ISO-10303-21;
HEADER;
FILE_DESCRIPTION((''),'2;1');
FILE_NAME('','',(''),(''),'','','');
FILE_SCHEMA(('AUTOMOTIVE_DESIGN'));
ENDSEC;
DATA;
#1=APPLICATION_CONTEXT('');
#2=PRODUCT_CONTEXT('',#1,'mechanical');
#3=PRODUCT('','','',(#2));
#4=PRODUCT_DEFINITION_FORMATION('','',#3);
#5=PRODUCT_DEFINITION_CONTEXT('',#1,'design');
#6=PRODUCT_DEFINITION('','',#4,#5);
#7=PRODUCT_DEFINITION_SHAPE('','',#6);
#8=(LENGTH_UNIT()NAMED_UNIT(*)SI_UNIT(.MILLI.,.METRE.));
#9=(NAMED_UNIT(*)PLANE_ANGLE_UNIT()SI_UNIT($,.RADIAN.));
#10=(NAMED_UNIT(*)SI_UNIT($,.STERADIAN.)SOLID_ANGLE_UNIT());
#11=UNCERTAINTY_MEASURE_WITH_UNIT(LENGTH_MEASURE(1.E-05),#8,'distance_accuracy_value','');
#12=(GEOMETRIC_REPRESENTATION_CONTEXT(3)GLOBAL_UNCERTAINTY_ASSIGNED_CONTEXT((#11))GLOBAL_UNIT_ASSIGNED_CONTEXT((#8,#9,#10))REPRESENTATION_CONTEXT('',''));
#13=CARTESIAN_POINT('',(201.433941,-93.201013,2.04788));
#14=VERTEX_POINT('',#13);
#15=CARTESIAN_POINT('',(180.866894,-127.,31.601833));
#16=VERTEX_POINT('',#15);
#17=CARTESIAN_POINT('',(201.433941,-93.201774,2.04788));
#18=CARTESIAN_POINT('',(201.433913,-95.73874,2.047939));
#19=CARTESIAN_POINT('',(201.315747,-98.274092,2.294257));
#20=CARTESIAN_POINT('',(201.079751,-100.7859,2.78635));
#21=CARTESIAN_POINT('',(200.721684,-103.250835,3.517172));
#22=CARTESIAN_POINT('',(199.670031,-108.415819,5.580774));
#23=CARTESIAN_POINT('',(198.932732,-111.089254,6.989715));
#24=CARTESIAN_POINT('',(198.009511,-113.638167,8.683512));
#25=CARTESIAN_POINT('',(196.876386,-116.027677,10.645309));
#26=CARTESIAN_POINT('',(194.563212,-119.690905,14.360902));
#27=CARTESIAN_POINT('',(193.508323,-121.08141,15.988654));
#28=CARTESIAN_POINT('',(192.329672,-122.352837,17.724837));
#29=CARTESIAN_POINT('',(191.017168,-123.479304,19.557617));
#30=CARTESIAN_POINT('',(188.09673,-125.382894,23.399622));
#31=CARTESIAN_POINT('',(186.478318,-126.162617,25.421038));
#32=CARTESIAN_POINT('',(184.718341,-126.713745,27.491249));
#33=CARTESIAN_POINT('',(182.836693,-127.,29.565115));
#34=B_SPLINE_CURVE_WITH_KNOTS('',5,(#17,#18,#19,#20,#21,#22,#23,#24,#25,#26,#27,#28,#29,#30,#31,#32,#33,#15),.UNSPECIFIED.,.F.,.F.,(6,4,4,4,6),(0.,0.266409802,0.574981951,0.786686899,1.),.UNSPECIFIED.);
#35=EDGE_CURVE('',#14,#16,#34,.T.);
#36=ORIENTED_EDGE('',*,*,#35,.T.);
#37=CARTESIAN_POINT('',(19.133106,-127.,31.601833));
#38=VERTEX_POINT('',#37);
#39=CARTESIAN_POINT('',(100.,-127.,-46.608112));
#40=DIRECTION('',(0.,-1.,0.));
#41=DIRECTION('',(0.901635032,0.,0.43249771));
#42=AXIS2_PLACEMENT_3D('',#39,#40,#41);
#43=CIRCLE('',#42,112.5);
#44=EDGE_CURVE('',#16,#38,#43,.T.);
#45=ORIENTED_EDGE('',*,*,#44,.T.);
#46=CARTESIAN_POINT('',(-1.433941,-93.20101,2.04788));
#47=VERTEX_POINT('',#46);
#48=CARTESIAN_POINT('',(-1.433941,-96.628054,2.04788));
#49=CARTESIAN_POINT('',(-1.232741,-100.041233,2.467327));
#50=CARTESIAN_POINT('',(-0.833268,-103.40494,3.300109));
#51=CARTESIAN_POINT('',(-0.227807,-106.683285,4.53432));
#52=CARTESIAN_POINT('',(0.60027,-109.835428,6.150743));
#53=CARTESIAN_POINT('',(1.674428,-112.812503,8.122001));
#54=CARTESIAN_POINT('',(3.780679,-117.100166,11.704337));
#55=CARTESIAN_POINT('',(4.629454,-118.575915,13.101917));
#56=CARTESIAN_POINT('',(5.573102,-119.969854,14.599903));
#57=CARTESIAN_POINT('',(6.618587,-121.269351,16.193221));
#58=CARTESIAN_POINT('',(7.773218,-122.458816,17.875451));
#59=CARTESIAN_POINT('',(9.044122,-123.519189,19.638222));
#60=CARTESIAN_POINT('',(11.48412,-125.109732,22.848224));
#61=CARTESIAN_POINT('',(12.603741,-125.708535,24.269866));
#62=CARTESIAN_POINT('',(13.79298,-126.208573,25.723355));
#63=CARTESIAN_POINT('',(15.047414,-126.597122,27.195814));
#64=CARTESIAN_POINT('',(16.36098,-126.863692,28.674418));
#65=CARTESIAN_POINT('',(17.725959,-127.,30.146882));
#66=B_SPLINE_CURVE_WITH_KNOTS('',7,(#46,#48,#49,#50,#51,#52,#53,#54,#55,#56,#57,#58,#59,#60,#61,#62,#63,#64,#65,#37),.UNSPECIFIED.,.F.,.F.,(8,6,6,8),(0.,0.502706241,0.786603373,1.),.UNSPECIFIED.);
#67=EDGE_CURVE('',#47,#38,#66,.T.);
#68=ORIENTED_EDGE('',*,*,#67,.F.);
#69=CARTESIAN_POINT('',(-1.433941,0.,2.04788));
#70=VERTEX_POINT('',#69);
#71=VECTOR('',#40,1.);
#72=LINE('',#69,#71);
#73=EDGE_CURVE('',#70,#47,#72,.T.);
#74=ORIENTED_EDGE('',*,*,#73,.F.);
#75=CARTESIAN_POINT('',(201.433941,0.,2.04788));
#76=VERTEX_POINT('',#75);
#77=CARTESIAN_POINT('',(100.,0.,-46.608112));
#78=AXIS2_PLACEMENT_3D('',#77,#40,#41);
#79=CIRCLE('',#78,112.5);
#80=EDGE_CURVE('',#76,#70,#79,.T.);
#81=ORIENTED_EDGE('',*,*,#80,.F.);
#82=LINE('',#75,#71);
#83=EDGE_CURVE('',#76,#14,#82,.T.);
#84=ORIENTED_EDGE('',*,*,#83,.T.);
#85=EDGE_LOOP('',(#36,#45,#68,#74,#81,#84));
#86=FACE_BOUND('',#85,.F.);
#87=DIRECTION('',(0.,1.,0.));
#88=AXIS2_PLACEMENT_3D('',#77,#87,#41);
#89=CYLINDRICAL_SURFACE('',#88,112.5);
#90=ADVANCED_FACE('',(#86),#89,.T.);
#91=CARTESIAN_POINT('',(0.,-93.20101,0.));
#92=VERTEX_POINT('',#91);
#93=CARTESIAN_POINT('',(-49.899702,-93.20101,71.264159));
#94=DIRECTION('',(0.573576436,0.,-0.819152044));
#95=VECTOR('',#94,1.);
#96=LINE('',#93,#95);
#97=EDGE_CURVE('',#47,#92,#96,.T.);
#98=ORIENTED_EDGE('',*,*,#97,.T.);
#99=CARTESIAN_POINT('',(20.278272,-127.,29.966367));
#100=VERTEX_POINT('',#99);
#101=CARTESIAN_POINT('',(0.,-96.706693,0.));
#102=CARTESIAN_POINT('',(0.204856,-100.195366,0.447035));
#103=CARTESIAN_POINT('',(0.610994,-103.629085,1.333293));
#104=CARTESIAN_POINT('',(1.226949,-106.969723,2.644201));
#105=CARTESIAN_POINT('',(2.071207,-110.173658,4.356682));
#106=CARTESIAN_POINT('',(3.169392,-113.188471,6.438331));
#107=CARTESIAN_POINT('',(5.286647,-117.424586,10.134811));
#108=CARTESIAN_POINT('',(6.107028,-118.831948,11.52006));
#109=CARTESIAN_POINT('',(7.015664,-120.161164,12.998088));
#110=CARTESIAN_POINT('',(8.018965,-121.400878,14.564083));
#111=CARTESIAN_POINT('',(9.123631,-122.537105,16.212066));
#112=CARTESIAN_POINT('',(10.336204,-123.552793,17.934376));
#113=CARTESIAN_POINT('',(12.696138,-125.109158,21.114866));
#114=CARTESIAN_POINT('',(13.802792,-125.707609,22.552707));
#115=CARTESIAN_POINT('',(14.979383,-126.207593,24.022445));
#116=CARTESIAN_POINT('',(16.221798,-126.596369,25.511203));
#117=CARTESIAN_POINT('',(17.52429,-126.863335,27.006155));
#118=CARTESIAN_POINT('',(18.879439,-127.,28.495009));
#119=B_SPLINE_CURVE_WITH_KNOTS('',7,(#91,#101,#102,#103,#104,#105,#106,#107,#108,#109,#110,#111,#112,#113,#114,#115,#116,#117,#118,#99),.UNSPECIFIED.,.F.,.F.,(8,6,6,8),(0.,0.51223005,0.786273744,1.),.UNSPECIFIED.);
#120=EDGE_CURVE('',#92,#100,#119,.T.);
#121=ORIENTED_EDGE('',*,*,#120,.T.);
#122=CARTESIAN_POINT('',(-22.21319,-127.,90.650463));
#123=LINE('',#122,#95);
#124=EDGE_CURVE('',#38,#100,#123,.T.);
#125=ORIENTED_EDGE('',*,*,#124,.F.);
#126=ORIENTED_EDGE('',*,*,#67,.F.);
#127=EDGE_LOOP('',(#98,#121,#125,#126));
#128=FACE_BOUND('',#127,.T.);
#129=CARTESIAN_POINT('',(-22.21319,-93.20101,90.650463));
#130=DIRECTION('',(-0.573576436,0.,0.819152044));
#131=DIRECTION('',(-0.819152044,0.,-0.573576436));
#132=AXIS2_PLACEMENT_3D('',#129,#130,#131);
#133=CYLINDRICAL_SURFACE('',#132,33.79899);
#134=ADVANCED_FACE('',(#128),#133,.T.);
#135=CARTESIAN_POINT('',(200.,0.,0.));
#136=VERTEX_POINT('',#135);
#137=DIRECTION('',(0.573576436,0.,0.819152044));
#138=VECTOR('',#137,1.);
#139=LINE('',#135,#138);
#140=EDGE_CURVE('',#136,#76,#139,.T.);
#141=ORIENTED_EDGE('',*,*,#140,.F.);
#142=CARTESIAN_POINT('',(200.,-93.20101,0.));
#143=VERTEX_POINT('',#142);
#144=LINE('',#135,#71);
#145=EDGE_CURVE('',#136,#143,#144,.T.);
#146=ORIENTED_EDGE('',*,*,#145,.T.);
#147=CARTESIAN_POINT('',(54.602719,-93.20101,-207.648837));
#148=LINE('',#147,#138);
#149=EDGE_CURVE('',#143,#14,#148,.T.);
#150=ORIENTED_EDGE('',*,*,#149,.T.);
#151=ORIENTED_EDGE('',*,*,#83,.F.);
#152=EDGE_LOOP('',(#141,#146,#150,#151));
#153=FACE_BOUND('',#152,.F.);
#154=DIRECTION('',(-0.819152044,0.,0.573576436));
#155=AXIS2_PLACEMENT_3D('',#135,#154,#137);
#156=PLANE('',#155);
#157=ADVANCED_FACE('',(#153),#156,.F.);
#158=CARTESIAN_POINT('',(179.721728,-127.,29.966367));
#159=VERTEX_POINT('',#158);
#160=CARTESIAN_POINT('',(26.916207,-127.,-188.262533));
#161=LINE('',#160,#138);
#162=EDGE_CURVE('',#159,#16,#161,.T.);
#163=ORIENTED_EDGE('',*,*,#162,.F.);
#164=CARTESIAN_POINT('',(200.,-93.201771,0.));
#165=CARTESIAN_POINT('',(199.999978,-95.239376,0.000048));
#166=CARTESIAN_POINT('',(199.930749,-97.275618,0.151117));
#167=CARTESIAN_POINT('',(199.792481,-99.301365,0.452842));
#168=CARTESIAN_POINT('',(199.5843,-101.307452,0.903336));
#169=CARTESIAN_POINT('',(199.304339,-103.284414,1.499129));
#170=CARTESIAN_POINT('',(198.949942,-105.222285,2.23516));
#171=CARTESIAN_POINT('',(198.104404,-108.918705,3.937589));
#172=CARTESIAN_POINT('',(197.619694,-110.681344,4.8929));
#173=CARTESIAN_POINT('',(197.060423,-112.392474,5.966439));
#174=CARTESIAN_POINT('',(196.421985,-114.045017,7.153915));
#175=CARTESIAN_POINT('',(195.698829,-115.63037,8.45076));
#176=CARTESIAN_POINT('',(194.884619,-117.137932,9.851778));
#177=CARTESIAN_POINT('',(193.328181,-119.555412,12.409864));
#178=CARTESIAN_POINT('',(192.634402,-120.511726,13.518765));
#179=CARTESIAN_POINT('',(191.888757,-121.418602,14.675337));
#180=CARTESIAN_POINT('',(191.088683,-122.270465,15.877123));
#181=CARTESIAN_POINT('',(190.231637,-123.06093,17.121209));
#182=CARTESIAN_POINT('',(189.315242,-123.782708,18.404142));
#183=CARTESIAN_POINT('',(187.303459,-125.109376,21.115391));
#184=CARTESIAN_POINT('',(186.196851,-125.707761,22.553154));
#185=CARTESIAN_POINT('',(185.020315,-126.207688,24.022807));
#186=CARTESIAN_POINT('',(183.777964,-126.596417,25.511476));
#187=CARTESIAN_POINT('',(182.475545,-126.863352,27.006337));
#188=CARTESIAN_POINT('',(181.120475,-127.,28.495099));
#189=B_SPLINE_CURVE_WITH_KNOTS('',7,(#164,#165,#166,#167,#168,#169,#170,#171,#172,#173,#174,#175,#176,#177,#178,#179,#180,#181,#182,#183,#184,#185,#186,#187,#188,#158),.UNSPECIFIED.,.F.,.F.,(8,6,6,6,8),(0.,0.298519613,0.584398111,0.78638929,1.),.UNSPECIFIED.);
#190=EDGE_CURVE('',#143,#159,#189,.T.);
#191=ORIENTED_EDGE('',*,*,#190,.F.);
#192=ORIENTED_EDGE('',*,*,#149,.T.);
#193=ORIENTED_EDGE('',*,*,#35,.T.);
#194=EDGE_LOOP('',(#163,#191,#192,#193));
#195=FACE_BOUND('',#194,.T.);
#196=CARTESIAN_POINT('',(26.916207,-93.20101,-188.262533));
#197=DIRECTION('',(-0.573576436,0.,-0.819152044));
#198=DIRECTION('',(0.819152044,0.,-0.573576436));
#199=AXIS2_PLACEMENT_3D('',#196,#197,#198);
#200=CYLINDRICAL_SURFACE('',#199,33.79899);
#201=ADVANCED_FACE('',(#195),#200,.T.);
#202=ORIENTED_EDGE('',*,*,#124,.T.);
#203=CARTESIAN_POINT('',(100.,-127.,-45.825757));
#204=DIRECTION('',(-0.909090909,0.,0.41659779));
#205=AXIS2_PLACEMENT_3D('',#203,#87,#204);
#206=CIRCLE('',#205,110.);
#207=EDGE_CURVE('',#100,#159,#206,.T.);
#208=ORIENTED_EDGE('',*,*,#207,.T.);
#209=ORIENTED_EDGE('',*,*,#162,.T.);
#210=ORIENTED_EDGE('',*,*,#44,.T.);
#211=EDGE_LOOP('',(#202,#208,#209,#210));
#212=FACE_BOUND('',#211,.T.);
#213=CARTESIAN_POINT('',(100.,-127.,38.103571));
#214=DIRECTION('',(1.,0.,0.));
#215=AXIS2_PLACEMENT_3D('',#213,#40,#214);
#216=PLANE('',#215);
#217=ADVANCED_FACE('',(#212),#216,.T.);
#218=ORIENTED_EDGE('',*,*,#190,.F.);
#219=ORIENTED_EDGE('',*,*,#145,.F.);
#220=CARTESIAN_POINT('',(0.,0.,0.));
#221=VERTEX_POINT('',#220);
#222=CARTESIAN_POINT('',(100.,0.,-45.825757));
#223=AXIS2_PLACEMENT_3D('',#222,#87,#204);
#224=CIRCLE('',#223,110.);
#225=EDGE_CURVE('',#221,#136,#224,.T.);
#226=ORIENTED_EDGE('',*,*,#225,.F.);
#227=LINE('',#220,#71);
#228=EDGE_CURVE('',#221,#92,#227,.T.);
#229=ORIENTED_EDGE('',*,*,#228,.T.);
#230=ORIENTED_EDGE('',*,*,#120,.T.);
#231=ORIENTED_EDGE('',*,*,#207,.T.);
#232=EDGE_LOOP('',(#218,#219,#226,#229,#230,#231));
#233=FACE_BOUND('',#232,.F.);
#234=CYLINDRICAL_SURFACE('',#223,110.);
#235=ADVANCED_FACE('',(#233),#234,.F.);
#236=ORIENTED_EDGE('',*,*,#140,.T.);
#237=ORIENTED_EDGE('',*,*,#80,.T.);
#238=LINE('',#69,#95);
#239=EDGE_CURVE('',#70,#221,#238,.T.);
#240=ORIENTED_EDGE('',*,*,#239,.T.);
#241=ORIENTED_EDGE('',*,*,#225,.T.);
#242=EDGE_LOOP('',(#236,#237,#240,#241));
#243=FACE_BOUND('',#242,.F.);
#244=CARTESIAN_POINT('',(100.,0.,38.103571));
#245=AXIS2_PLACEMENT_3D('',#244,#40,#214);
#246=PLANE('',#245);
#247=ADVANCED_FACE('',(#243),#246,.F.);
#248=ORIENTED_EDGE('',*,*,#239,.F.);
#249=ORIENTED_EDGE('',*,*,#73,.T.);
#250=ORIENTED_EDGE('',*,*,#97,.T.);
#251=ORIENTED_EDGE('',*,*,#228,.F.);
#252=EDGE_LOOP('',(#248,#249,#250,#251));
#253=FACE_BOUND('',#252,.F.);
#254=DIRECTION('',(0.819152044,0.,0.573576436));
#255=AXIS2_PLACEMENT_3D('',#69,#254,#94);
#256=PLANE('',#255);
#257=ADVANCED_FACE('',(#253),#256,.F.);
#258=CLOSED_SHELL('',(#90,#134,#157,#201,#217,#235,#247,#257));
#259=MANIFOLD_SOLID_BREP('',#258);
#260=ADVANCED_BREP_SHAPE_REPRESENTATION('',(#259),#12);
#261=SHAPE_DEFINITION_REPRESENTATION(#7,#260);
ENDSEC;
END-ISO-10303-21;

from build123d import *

# Parameters (mm, degrees)
F1_DEPTH    = 127
F2_T1_DEPTH = 340.4898987322
F2_T3_DEPTH = 340.4898987322


# Not quite as in the source:
# - a fillet or chamfer that OpenCascade refuses, or shapes differently, is made with other operations: its cross-section is extruded or revolved along the edge and cut away or added


with BuildPart() as f1:
    # F0 (on Front) → F1 (new body)
    with BuildSketch(Plane.XZ):
        with BuildLine():
            ThreePointArc((0, 0), (100, 64.1742430504), (200, 0))
            Line((200, 0), (201.4339410909, 2.0478801107))
            ThreePointArc((201.4339410909, 2.0478801107), (100, 65.8918877277), (-1.4339410909, 2.0478801107))
            Line((-1.4339410909, 2.0478801107), (0, 0))
        make_face()
    extrude(amount=F1_DEPTH)

    # F2: fillet of radius 33.7989898732 on 2 edges, made by hand

    # F2_s2 → F2_t1 (cut)
    with BuildSketch(Plane(origin=(-79.5992955607, 0, -113.6795752931), x_dir=(0, 1, 0), z_dir=(0.5735764364, 0, 0.8191520443))):
        with BuildLine():
            ThreePointArc((-93.2010101268, -163.8304088578), (-117.1005050634, -153.9309139212), (-127, -130.0314189846))
            Line((-127, -130.0314189846), (-127, -163.8304088578))
            Line((-127, -163.8304088578), (-93.2010101268, -163.8304088578))
        make_face()
    extrude(amount=F2_T1_DEPTH, mode=Mode.SUBTRACT)

    # F2_s4 → F2_t3 (cut)
    with BuildSketch(Plane(origin=(-49.8997015002, 0, 71.2641592346), x_dir=(0, 1, 0), z_dir=(0.5735764364, 0, -0.8191520443))):
        with BuildLine():
            ThreePointArc((-93.2010101268, 0), (-117.1005050634, 9.8994949366), (-127, 33.7989898732))
            Line((-127, 33.7989898732), (-127, 0))
            Line((-127, 0), (-93.2010101268, 0))
        make_face()
    extrude(amount=F2_T3_DEPTH, mode=Mode.SUBTRACT)


solid = f1.part
